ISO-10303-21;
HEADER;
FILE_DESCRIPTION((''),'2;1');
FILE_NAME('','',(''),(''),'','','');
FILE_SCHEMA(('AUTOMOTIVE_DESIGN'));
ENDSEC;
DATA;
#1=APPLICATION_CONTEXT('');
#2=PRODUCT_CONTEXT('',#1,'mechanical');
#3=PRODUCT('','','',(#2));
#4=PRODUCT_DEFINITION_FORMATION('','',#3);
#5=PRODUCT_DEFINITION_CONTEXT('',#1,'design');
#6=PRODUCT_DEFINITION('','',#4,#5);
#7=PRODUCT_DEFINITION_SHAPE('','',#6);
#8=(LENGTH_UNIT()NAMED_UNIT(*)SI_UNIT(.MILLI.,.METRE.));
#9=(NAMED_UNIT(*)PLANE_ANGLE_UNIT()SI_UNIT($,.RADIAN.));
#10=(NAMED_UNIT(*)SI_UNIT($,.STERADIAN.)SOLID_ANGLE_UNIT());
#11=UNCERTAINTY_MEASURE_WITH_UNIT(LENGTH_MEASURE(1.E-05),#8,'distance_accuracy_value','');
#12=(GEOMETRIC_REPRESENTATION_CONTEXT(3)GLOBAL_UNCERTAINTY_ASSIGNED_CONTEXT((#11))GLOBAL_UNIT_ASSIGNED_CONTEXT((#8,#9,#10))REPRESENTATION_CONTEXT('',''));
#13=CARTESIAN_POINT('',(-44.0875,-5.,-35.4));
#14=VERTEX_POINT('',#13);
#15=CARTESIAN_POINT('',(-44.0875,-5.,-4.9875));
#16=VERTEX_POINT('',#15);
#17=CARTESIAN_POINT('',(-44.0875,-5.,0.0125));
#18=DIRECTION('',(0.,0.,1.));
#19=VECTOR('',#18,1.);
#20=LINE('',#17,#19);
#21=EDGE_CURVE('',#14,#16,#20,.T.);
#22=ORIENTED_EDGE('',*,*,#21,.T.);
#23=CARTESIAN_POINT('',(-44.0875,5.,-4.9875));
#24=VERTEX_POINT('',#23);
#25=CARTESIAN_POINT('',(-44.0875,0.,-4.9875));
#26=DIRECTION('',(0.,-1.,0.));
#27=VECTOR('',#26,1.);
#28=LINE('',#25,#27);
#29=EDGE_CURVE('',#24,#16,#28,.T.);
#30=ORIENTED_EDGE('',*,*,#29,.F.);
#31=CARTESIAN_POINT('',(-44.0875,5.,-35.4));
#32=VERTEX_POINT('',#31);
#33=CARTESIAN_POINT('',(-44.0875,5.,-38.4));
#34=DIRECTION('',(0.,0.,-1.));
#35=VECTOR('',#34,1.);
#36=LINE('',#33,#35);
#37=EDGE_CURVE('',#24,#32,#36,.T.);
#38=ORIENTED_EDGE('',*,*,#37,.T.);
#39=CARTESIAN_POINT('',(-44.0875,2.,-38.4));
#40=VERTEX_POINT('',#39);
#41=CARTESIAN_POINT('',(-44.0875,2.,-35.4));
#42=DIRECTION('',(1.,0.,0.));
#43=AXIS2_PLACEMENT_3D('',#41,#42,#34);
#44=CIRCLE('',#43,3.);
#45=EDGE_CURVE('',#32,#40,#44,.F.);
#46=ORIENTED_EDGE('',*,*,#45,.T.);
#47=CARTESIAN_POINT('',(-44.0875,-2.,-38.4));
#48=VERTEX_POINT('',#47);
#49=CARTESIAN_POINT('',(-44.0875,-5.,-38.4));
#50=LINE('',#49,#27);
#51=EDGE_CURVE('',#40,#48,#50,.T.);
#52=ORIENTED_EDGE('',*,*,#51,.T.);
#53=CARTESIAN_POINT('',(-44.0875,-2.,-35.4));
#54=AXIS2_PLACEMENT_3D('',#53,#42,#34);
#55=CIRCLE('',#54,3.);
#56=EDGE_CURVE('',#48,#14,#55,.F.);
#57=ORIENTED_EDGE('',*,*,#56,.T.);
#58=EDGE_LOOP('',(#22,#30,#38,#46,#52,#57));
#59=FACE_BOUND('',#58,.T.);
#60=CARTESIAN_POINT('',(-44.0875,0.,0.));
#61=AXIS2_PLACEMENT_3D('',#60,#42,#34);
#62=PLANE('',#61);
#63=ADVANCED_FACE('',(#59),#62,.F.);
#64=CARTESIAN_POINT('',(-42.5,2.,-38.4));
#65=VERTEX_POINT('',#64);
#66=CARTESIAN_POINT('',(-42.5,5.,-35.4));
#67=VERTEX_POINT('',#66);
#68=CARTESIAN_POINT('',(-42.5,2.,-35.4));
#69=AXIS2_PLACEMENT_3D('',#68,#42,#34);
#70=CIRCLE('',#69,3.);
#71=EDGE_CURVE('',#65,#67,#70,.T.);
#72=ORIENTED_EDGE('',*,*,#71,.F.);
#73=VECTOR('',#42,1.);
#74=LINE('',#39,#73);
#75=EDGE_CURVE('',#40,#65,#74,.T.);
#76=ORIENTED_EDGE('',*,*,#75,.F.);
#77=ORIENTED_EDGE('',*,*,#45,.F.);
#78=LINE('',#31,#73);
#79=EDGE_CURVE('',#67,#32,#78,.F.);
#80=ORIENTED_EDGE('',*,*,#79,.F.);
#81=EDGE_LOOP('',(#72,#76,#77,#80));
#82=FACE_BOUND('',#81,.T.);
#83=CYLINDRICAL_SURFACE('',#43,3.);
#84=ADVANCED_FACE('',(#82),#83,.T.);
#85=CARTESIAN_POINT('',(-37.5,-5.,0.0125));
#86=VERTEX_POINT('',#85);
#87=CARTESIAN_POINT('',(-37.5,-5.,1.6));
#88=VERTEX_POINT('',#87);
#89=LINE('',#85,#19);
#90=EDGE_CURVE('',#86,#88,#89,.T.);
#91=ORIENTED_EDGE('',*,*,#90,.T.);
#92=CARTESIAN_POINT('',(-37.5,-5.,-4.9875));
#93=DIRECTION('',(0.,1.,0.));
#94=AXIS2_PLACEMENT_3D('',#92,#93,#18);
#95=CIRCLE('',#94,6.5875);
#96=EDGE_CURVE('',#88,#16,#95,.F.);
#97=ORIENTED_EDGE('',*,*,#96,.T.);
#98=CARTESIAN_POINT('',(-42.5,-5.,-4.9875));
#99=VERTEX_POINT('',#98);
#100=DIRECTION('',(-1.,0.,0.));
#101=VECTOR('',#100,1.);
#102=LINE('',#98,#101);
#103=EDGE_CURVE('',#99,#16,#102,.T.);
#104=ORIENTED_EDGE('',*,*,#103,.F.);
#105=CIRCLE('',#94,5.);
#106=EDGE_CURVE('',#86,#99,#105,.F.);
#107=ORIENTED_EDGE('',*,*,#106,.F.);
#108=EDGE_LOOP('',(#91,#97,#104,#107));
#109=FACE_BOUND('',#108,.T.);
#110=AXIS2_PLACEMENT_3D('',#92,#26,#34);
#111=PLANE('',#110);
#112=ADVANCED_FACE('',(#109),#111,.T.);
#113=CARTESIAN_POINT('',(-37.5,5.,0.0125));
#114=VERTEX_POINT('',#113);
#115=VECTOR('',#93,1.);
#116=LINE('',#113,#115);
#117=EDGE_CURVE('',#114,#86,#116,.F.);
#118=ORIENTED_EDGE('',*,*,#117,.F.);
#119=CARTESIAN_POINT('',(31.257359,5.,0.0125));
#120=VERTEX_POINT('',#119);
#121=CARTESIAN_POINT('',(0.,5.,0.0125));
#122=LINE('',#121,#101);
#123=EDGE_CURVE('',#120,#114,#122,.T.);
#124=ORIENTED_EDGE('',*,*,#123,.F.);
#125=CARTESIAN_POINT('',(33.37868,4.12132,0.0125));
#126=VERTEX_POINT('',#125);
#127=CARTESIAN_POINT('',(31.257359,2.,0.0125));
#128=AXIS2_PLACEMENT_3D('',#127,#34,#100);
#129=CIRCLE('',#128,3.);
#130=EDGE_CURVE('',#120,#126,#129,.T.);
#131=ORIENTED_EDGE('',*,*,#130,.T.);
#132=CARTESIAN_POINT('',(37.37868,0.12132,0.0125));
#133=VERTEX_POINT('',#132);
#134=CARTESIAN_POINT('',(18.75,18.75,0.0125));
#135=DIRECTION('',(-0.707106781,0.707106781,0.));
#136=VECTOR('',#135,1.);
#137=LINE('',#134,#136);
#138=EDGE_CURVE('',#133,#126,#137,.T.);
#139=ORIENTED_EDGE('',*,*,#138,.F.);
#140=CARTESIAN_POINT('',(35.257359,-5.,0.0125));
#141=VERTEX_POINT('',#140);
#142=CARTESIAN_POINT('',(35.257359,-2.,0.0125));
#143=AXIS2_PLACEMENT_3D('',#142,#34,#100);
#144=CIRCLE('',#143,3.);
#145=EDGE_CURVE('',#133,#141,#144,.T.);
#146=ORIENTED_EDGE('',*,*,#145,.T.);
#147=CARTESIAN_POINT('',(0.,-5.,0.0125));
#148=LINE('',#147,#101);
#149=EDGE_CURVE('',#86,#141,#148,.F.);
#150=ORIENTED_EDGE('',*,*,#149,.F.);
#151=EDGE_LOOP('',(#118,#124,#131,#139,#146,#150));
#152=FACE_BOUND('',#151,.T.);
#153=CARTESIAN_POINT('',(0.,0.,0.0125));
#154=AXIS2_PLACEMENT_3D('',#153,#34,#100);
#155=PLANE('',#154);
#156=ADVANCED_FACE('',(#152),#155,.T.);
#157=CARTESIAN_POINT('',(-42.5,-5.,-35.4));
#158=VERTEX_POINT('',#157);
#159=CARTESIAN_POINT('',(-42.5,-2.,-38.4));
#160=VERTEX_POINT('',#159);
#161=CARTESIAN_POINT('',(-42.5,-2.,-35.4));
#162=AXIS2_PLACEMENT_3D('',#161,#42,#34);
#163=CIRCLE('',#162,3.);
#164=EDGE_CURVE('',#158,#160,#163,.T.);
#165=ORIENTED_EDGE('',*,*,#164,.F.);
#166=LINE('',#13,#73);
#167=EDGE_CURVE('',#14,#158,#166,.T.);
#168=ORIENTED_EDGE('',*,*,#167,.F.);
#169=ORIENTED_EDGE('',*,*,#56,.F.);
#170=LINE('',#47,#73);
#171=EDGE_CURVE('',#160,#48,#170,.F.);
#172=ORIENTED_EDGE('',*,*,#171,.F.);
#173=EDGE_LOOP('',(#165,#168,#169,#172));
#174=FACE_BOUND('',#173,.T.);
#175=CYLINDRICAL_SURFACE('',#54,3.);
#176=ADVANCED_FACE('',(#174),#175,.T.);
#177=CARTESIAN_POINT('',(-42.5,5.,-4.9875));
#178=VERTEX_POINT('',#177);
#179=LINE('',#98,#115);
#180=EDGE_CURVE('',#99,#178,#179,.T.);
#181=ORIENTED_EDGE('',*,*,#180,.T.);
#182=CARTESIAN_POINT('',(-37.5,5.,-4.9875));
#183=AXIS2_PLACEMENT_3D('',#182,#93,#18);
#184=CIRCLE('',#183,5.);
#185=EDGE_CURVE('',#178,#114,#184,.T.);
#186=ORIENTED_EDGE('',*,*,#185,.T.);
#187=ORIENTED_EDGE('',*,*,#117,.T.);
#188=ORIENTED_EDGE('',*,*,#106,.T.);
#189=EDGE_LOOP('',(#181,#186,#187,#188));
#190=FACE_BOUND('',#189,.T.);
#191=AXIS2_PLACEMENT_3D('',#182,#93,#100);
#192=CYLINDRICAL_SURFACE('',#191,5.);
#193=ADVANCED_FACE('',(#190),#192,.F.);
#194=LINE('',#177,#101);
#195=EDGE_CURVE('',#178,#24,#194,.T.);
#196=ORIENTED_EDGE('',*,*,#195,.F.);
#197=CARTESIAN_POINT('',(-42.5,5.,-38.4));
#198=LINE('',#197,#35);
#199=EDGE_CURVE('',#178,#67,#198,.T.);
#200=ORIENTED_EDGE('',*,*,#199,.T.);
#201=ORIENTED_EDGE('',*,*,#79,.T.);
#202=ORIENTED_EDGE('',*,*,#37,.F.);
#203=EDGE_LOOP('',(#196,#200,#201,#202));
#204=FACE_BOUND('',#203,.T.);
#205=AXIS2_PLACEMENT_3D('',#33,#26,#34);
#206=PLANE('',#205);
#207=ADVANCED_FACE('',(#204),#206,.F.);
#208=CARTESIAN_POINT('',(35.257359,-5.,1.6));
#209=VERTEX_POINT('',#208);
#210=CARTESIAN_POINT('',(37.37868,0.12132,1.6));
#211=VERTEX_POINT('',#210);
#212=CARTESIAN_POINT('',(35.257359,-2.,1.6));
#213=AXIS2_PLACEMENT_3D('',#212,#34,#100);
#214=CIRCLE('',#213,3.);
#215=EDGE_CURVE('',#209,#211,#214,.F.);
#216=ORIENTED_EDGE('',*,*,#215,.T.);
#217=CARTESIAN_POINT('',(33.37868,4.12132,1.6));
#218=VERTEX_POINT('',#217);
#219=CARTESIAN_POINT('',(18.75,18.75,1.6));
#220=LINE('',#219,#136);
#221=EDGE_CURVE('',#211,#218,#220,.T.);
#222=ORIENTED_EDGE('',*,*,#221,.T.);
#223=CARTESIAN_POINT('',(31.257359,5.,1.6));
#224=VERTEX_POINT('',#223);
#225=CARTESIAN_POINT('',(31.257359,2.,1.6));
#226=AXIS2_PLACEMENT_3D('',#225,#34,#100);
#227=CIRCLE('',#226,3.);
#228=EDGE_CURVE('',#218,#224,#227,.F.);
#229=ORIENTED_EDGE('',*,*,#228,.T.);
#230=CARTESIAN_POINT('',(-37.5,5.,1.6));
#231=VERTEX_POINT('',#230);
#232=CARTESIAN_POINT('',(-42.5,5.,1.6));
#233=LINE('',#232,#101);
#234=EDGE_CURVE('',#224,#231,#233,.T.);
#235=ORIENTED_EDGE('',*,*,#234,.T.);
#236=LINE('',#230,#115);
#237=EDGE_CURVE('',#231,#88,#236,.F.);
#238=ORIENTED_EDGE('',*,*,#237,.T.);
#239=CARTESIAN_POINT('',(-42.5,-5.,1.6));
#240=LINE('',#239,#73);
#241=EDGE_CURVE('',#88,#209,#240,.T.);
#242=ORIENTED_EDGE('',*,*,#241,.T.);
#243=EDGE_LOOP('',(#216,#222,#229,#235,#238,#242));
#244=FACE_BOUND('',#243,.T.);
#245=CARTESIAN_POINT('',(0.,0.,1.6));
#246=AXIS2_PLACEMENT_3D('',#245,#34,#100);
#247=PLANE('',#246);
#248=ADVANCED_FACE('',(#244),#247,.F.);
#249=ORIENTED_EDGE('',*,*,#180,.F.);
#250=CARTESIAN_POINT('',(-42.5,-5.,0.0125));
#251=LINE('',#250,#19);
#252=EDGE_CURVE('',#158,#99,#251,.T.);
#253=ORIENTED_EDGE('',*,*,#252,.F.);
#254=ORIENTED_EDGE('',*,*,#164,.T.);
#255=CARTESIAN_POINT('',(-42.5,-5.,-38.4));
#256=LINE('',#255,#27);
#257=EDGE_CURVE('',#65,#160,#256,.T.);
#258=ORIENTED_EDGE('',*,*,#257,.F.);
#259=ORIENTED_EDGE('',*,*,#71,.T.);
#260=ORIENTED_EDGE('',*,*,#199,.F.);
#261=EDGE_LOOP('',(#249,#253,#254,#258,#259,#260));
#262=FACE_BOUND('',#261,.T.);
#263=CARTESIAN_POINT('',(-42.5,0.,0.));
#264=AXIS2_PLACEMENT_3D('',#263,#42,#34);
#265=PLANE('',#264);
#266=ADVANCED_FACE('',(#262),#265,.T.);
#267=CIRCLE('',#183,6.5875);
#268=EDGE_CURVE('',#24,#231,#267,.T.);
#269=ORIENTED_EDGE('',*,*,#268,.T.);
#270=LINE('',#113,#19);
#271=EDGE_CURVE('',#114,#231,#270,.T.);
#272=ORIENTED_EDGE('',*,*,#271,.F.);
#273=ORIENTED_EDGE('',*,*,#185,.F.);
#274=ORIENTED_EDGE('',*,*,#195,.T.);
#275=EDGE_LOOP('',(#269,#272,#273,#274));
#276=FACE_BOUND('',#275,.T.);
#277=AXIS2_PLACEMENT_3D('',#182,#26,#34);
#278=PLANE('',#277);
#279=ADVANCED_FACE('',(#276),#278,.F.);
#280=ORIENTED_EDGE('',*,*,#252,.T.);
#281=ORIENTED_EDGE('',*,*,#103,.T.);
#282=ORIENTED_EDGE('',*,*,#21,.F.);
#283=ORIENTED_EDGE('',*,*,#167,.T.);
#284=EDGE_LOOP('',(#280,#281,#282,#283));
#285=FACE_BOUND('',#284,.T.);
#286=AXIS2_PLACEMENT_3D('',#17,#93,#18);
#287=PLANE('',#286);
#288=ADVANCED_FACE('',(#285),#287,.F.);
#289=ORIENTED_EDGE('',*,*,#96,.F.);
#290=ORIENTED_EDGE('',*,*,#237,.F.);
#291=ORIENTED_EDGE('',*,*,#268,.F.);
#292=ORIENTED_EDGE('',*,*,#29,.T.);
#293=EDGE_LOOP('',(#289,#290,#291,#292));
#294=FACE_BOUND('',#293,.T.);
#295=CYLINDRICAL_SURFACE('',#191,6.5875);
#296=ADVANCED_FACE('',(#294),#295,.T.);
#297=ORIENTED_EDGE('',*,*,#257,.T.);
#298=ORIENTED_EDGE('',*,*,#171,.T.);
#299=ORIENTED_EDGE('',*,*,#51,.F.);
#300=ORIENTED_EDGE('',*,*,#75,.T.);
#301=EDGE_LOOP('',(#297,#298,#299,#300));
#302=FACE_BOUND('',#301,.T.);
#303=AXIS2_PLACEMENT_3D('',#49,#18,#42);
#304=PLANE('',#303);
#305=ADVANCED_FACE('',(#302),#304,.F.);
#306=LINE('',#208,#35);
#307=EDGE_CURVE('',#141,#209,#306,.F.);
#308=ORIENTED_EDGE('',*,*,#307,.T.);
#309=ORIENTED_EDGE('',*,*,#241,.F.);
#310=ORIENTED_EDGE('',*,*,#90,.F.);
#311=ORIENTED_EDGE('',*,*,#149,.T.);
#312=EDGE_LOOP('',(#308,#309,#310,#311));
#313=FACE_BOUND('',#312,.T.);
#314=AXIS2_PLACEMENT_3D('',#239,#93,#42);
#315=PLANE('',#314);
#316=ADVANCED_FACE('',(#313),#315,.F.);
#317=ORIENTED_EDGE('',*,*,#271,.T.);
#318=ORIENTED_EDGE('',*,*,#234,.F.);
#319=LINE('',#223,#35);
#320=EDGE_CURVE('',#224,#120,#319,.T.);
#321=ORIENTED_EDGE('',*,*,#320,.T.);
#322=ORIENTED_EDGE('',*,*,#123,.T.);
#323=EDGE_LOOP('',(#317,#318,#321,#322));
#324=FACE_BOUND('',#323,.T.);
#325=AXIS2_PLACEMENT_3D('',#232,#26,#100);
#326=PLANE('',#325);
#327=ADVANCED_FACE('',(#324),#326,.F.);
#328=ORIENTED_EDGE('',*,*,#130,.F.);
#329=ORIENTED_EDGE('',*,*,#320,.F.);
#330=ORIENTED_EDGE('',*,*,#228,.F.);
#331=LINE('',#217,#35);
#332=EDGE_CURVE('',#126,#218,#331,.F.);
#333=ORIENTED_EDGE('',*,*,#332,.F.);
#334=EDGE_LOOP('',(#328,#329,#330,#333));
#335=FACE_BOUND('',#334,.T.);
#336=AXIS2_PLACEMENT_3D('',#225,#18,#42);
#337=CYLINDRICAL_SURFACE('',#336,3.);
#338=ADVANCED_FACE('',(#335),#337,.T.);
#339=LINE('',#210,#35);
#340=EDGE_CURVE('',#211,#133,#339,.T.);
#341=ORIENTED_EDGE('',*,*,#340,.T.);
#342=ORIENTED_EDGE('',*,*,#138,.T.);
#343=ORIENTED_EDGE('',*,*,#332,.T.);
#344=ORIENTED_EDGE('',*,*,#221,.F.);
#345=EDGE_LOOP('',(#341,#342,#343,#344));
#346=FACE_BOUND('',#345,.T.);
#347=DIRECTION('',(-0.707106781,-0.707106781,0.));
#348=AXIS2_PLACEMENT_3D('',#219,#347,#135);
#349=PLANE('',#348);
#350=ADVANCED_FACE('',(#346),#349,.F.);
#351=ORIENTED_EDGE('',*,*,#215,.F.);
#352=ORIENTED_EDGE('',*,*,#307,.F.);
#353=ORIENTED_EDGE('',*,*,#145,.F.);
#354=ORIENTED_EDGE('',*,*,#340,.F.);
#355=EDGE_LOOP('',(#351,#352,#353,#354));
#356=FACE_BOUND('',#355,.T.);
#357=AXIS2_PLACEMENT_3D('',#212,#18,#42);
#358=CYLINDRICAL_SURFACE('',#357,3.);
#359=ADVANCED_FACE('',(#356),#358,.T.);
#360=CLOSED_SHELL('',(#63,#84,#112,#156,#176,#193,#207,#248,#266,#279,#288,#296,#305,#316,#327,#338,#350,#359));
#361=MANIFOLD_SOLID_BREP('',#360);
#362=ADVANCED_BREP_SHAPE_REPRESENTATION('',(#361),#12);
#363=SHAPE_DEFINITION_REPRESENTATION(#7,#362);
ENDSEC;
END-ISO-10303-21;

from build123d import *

# Parameters (mm, degrees)
SKETCH1_W                    = 85
SKETCH1_H                    = 10
BOSS_EXTRUDE1_DEPTH          = 1.6
CUT_EXTRUDE1_DEPTH           = 43.823007835
CUT_EXTRUDE1_DEPTH_BACK      = 10
CONVERT_SOLID1_DEPTH         = 0.0125
EDGE_FLANGE1_STRIP_W         = 16.35
EDGE_FLANGE1_STRIP_H         = 1.5875
EDGE_FLANGE1_STRIP_CUT_DEPTH = 10
EDGE_FLANGE1_DEPTH           = 10
FILLET2_R                    = 3


# Read off the part's stored shape, not the designer's step: Convert-Solid1
# Sheet-metal steps are written as plain solids
with BuildPart() as part:
    # Sketch1 → Boss-Extrude1 (new body)
    with BuildSketch(Plane.XY):
        Rectangle(SKETCH1_W, SKETCH1_H)
    extrude(amount=BOSS_EXTRUDE1_DEPTH)

    # Sketch2 → Cut-Extrude1 (cut, two sides: drawn at the far end of the back side and taken through both)
    with BuildSketch(Plane.XY.offset(1.6).offset(-CUT_EXTRUDE1_DEPTH_BACK)):
        Polygon((32.5, 5), (42.5, -5), (42.5, 5), align=None)
    extrude(amount=CUT_EXTRUDE1_DEPTH + CUT_EXTRUDE1_DEPTH_BACK, mode=Mode.SUBTRACT)

    # Convert-Solid1 outline → Convert-Solid1 (cut)
    with BuildSketch(Plane.XY):
        Polygon((32.5, 5), (-42.5, 5), (-42.5, -5), (42.5, -5), align=None)
    extrude(amount=CONVERT_SOLID1_DEPTH, mode=Mode.SUBTRACT)

    # Edge-Flange1 strip (across the edge) → Edge-Flange1 strip cut (cut)
    with BuildSketch(Plane(origin=(-42.5, -5, 0.0125), x_dir=(1, 0, 0), z_dir=(0, 1, 0))):
        with Locations((-3.175, -0.79375)):
            Rectangle(EDGE_FLANGE1_STRIP_W, EDGE_FLANGE1_STRIP_H)
    extrude(amount=EDGE_FLANGE1_STRIP_CUT_DEPTH, mode=Mode.SUBTRACT)

    # Edge-Flange1 section (across the edge) → Edge-Flange1 (add)
    with BuildSketch(Plane(origin=(-42.5, -5, 0.0125), x_dir=(1, 0, 0), z_dir=(0, 1, 0))):
        with BuildLine():
            Line((-1.5875, 5), (-1.5875, 38.4125))
            Line((-1.5875, 38.4125), (0, 38.4125))
            Line((0, 38.4125), (0, 5))
            ThreePointArc((0, 5), (1.464466094, 1.464466094), (5, 0))
            Line((5, 0), (5, -1.5875))
            ThreePointArc((5, -1.5875), (0.341934079, 0.341934079), (-1.5875, 5))
        make_face()
    extrude(amount=EDGE_FLANGE1_DEPTH)

    # Fillet2
    fillet2_edges = [part.edges().sort_by_distance(p)[0] for p in [
        (-43.29375, -5, -38.4),
        (-43.29375, 5, -38.4),
        (42.5, -5, 0.80625),
        (32.5, 5, 0.80625),
    ]]
    fillet(fillet2_edges, radius=FILLET2_R)


solid = part.part
